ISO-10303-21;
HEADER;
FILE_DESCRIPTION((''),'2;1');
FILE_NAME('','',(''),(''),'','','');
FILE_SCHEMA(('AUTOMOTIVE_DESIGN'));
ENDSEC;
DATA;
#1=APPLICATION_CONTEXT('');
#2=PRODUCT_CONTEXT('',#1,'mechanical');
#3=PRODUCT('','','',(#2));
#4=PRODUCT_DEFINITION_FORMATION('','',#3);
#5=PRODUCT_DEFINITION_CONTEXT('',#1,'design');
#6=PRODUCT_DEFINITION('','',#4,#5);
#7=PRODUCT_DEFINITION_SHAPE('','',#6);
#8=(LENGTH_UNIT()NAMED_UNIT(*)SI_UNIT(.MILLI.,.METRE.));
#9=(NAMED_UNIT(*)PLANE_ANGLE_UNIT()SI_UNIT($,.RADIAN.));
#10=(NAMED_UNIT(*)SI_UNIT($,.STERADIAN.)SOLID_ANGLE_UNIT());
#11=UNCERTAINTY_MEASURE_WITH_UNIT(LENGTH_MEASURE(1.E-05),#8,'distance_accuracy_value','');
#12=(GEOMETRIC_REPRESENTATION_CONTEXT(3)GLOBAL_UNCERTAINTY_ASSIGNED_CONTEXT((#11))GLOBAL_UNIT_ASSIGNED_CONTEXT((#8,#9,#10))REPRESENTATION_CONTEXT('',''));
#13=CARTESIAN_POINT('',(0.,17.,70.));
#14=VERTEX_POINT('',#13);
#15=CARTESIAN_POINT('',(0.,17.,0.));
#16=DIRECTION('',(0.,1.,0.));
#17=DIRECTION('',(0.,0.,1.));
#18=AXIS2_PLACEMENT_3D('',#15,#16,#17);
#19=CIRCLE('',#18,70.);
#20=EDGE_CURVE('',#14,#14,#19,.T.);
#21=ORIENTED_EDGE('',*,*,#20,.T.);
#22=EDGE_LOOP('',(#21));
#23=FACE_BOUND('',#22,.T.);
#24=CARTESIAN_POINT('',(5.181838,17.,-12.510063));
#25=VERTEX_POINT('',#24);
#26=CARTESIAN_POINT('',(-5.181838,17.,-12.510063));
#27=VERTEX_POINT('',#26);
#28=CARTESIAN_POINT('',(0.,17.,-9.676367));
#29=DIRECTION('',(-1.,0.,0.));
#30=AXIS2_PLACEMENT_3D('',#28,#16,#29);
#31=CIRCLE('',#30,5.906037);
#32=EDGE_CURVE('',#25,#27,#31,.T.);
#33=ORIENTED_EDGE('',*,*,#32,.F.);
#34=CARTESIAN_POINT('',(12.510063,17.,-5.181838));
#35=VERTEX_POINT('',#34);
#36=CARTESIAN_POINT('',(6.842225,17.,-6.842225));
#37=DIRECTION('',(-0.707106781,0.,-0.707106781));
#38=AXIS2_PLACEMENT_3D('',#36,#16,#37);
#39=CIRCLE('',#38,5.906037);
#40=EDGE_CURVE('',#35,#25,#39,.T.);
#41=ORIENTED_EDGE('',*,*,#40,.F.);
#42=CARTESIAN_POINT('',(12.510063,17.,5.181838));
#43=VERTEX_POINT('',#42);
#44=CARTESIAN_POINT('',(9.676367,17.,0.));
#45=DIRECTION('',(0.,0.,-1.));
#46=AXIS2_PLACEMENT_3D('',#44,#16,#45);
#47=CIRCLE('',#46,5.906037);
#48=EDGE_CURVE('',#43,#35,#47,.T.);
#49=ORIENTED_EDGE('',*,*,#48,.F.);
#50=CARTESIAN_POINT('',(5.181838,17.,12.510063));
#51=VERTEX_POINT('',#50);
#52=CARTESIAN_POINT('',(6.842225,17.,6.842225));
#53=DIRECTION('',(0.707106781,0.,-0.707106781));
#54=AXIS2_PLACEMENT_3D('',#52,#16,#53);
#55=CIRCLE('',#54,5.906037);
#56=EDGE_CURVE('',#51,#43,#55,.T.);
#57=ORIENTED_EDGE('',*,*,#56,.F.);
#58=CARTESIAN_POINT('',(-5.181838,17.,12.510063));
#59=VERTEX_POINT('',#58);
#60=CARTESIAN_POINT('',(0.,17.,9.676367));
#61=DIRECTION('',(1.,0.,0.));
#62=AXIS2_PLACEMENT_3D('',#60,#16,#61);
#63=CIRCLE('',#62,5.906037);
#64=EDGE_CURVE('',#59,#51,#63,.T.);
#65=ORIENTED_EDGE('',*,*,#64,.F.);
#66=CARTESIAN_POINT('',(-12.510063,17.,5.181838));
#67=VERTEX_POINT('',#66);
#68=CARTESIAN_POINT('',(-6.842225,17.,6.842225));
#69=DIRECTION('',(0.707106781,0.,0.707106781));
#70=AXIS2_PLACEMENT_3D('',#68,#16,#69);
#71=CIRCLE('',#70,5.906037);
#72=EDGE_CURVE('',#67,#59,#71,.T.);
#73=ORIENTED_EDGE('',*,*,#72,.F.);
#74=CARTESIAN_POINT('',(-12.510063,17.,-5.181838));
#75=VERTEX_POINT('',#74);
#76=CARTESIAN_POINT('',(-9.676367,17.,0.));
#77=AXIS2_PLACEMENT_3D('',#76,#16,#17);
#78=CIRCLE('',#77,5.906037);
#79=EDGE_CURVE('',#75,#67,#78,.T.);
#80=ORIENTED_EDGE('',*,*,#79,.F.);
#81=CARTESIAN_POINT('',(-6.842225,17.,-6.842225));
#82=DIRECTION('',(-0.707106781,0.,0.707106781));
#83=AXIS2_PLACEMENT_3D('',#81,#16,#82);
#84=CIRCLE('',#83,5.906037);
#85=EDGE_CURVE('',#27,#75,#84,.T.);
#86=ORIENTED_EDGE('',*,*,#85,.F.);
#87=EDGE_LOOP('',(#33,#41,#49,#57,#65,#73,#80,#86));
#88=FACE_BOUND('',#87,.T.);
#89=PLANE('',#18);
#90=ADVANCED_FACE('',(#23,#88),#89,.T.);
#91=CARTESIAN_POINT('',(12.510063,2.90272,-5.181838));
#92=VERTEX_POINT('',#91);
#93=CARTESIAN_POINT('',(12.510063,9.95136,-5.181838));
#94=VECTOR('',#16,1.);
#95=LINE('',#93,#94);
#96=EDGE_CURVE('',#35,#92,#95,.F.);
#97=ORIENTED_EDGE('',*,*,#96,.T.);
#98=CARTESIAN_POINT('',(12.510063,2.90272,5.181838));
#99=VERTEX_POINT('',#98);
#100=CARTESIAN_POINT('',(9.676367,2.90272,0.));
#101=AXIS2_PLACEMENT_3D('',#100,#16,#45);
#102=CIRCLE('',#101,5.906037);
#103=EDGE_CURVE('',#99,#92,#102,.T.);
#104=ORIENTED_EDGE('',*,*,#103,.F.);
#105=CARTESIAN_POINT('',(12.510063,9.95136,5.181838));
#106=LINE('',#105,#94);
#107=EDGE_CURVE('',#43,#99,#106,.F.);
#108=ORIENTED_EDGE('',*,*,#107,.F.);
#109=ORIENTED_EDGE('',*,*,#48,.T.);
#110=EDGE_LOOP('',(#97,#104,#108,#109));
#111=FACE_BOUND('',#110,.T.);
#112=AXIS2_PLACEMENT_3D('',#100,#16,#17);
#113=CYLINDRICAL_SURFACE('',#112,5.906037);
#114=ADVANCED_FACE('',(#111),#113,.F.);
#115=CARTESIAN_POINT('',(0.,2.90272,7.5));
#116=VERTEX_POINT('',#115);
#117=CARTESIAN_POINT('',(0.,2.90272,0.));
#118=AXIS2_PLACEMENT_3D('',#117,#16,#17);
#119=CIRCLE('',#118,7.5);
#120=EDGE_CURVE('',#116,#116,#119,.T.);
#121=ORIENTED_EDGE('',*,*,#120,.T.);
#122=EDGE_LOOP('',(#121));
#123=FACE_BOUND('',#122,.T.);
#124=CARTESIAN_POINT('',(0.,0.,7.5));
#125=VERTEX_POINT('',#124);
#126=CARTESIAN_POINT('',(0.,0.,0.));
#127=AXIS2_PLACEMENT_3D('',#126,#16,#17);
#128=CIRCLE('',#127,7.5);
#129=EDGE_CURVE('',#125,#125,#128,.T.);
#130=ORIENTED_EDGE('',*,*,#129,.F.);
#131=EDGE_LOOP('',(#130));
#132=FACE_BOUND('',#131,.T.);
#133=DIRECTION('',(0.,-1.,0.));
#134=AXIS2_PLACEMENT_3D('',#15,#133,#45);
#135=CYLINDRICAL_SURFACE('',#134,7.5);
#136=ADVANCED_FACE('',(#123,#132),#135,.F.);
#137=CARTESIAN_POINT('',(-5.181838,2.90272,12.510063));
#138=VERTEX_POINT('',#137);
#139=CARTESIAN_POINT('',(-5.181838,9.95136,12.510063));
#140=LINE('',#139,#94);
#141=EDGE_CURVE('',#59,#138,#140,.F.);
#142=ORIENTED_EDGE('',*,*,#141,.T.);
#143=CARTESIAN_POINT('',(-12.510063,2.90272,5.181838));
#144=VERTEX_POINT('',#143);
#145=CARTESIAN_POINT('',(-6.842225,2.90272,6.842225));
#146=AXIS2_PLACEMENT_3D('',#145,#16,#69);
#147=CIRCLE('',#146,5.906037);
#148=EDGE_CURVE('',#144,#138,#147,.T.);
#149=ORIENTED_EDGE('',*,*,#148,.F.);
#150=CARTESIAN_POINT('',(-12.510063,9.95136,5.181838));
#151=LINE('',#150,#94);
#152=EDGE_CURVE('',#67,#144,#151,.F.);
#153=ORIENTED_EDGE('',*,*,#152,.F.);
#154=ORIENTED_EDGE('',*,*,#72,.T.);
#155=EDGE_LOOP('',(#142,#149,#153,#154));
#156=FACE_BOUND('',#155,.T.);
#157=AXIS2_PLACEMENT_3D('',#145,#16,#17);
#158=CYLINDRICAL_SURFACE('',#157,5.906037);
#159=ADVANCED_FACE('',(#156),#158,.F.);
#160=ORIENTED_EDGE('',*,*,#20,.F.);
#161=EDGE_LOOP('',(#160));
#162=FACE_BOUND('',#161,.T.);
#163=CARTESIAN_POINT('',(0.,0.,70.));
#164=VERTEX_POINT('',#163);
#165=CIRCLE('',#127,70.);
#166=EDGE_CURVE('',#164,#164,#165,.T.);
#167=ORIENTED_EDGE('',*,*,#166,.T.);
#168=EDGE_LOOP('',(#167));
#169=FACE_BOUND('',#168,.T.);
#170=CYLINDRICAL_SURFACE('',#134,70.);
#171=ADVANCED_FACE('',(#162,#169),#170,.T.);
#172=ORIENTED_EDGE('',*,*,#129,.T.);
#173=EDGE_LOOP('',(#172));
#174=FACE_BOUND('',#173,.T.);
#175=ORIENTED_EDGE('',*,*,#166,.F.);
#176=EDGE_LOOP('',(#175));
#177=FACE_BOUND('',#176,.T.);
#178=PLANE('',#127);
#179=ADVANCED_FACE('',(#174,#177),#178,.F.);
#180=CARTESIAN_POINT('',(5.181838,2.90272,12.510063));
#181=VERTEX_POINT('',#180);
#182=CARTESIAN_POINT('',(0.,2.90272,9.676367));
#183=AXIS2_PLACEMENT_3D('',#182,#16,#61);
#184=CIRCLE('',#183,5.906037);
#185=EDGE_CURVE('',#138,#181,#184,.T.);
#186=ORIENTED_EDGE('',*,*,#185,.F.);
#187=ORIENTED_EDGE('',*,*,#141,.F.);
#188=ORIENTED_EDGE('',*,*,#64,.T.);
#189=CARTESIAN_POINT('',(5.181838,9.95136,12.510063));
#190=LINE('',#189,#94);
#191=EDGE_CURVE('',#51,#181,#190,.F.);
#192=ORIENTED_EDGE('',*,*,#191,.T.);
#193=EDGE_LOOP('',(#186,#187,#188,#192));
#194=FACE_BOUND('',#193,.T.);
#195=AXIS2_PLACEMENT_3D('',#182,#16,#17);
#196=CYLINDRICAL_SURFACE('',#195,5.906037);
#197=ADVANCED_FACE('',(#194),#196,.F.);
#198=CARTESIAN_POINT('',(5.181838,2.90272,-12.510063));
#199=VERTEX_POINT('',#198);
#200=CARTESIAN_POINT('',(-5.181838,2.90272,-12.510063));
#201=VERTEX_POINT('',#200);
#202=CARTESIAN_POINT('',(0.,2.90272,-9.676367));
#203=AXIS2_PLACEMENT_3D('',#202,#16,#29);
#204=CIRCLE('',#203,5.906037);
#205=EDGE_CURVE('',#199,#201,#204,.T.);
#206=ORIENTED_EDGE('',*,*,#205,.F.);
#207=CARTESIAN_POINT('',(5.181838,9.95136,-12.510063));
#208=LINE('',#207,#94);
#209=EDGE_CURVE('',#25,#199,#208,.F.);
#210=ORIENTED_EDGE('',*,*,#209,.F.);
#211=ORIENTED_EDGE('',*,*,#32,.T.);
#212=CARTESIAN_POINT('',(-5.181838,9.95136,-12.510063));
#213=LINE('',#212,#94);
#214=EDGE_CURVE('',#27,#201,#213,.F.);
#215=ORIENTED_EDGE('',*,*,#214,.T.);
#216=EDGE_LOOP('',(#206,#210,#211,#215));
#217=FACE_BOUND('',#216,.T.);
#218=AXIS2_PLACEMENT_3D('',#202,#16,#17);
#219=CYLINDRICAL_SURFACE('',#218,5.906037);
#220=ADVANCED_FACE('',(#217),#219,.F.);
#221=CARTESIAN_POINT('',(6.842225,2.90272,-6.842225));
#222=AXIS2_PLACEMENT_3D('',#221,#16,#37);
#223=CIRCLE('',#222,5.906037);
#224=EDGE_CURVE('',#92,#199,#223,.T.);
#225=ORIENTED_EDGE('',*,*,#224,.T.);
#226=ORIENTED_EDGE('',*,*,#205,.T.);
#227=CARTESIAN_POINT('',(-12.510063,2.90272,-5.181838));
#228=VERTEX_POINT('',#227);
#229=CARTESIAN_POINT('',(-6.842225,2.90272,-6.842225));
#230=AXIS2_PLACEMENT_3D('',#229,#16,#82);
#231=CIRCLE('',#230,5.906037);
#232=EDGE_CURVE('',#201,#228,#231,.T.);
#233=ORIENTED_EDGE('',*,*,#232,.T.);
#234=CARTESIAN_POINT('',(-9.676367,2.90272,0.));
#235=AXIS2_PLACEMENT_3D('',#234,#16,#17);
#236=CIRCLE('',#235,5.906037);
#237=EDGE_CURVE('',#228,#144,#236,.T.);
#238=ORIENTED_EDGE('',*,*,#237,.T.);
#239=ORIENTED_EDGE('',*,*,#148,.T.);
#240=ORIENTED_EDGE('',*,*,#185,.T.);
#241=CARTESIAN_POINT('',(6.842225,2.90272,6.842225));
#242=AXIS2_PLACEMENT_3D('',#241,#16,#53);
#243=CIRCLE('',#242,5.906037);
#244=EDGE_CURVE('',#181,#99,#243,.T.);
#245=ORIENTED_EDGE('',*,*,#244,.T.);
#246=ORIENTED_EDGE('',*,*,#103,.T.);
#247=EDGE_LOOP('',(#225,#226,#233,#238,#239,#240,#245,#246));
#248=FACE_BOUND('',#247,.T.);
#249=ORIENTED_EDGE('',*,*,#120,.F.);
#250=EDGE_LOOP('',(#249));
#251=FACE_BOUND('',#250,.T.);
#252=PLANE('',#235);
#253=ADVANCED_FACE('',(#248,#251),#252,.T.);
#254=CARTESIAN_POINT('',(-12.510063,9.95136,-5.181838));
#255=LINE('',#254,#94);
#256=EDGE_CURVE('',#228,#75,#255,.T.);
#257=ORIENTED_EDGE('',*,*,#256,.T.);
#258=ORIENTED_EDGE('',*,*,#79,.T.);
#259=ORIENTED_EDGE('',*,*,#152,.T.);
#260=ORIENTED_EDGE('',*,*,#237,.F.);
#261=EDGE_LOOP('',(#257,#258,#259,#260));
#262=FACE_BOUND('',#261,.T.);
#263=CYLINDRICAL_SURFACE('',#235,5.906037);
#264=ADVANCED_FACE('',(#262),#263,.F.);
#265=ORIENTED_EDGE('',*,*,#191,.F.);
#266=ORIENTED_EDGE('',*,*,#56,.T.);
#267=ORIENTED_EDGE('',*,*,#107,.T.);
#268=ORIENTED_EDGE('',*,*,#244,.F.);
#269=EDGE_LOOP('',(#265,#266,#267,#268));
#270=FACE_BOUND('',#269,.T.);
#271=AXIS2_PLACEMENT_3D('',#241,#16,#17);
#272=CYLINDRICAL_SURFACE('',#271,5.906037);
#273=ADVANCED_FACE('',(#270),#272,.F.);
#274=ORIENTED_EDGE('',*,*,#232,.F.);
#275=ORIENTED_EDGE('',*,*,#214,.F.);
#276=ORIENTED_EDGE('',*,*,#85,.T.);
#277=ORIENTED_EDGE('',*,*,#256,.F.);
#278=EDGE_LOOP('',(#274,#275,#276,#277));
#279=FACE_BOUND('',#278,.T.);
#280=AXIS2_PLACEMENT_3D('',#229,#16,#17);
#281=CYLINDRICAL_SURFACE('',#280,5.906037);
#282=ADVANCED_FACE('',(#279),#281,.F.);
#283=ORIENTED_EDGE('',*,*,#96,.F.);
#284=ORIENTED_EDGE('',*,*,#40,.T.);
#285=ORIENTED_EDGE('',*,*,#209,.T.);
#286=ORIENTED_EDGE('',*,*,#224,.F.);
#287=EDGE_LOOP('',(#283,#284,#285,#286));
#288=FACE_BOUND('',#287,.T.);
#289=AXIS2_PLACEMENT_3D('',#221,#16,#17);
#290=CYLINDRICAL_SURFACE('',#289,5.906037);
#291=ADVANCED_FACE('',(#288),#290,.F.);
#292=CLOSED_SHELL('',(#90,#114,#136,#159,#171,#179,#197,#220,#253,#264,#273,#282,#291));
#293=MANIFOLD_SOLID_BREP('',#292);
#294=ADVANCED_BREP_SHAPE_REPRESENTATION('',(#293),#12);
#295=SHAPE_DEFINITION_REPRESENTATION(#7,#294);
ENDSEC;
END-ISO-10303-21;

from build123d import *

# Parameters (mm, degrees)
SKETCH1_R           = 70
BOSS_EXTRUDE1_DEPTH = 17
SKETCH2_R           = 7.5
CUT_EXTRUDE1_DEPTH  = 101.444014257
SKETCH3_R           = 5.906037177
CUT_EXTRUDE2_DEPTH  = 14.097280092
CIRPATTERN1_COUNT   = 8


with BuildPart() as part:
    # Sketch1 → Boss-Extrude1 (new body)
    with BuildSketch(Plane(origin=(0, 0, 0), x_dir=(1, 0, 0), z_dir=(0, 1, 0))):
        Circle(SKETCH1_R)
    extrude(amount=BOSS_EXTRUDE1_DEPTH)

    # Sketch2 → Cut-Extrude1 (cut, through all)
    with BuildSketch(Plane(origin=(0, 0, 0), x_dir=(1, 0, 0), z_dir=(0, 1, 0))):
        Circle(SKETCH2_R)
    extrude(amount=CUT_EXTRUDE1_DEPTH, mode=Mode.SUBTRACT)

    # Sketch3 → Cut-Extrude2 (cut)
    with BuildSketch(Plane(origin=(0, 17, 0), x_dir=(1, 0, 0), z_dir=(0, 1, 0))):
        with Locations((-9.676366693, 0)):
            Circle(SKETCH3_R)
    cut_extrude2 = extrude(amount=-CUT_EXTRUDE2_DEPTH, mode=Mode.SUBTRACT)

    # CirPattern1: Cut-Extrude2 ×8 about axis
    cirpattern1_axis = Axis((0, 0, 0), (0, 1, 0))
    for i in range(1, CIRPATTERN1_COUNT):
        add(cut_extrude2.rotate(cirpattern1_axis, i * 360 / CIRPATTERN1_COUNT), mode=Mode.SUBTRACT)


solid = part.part
